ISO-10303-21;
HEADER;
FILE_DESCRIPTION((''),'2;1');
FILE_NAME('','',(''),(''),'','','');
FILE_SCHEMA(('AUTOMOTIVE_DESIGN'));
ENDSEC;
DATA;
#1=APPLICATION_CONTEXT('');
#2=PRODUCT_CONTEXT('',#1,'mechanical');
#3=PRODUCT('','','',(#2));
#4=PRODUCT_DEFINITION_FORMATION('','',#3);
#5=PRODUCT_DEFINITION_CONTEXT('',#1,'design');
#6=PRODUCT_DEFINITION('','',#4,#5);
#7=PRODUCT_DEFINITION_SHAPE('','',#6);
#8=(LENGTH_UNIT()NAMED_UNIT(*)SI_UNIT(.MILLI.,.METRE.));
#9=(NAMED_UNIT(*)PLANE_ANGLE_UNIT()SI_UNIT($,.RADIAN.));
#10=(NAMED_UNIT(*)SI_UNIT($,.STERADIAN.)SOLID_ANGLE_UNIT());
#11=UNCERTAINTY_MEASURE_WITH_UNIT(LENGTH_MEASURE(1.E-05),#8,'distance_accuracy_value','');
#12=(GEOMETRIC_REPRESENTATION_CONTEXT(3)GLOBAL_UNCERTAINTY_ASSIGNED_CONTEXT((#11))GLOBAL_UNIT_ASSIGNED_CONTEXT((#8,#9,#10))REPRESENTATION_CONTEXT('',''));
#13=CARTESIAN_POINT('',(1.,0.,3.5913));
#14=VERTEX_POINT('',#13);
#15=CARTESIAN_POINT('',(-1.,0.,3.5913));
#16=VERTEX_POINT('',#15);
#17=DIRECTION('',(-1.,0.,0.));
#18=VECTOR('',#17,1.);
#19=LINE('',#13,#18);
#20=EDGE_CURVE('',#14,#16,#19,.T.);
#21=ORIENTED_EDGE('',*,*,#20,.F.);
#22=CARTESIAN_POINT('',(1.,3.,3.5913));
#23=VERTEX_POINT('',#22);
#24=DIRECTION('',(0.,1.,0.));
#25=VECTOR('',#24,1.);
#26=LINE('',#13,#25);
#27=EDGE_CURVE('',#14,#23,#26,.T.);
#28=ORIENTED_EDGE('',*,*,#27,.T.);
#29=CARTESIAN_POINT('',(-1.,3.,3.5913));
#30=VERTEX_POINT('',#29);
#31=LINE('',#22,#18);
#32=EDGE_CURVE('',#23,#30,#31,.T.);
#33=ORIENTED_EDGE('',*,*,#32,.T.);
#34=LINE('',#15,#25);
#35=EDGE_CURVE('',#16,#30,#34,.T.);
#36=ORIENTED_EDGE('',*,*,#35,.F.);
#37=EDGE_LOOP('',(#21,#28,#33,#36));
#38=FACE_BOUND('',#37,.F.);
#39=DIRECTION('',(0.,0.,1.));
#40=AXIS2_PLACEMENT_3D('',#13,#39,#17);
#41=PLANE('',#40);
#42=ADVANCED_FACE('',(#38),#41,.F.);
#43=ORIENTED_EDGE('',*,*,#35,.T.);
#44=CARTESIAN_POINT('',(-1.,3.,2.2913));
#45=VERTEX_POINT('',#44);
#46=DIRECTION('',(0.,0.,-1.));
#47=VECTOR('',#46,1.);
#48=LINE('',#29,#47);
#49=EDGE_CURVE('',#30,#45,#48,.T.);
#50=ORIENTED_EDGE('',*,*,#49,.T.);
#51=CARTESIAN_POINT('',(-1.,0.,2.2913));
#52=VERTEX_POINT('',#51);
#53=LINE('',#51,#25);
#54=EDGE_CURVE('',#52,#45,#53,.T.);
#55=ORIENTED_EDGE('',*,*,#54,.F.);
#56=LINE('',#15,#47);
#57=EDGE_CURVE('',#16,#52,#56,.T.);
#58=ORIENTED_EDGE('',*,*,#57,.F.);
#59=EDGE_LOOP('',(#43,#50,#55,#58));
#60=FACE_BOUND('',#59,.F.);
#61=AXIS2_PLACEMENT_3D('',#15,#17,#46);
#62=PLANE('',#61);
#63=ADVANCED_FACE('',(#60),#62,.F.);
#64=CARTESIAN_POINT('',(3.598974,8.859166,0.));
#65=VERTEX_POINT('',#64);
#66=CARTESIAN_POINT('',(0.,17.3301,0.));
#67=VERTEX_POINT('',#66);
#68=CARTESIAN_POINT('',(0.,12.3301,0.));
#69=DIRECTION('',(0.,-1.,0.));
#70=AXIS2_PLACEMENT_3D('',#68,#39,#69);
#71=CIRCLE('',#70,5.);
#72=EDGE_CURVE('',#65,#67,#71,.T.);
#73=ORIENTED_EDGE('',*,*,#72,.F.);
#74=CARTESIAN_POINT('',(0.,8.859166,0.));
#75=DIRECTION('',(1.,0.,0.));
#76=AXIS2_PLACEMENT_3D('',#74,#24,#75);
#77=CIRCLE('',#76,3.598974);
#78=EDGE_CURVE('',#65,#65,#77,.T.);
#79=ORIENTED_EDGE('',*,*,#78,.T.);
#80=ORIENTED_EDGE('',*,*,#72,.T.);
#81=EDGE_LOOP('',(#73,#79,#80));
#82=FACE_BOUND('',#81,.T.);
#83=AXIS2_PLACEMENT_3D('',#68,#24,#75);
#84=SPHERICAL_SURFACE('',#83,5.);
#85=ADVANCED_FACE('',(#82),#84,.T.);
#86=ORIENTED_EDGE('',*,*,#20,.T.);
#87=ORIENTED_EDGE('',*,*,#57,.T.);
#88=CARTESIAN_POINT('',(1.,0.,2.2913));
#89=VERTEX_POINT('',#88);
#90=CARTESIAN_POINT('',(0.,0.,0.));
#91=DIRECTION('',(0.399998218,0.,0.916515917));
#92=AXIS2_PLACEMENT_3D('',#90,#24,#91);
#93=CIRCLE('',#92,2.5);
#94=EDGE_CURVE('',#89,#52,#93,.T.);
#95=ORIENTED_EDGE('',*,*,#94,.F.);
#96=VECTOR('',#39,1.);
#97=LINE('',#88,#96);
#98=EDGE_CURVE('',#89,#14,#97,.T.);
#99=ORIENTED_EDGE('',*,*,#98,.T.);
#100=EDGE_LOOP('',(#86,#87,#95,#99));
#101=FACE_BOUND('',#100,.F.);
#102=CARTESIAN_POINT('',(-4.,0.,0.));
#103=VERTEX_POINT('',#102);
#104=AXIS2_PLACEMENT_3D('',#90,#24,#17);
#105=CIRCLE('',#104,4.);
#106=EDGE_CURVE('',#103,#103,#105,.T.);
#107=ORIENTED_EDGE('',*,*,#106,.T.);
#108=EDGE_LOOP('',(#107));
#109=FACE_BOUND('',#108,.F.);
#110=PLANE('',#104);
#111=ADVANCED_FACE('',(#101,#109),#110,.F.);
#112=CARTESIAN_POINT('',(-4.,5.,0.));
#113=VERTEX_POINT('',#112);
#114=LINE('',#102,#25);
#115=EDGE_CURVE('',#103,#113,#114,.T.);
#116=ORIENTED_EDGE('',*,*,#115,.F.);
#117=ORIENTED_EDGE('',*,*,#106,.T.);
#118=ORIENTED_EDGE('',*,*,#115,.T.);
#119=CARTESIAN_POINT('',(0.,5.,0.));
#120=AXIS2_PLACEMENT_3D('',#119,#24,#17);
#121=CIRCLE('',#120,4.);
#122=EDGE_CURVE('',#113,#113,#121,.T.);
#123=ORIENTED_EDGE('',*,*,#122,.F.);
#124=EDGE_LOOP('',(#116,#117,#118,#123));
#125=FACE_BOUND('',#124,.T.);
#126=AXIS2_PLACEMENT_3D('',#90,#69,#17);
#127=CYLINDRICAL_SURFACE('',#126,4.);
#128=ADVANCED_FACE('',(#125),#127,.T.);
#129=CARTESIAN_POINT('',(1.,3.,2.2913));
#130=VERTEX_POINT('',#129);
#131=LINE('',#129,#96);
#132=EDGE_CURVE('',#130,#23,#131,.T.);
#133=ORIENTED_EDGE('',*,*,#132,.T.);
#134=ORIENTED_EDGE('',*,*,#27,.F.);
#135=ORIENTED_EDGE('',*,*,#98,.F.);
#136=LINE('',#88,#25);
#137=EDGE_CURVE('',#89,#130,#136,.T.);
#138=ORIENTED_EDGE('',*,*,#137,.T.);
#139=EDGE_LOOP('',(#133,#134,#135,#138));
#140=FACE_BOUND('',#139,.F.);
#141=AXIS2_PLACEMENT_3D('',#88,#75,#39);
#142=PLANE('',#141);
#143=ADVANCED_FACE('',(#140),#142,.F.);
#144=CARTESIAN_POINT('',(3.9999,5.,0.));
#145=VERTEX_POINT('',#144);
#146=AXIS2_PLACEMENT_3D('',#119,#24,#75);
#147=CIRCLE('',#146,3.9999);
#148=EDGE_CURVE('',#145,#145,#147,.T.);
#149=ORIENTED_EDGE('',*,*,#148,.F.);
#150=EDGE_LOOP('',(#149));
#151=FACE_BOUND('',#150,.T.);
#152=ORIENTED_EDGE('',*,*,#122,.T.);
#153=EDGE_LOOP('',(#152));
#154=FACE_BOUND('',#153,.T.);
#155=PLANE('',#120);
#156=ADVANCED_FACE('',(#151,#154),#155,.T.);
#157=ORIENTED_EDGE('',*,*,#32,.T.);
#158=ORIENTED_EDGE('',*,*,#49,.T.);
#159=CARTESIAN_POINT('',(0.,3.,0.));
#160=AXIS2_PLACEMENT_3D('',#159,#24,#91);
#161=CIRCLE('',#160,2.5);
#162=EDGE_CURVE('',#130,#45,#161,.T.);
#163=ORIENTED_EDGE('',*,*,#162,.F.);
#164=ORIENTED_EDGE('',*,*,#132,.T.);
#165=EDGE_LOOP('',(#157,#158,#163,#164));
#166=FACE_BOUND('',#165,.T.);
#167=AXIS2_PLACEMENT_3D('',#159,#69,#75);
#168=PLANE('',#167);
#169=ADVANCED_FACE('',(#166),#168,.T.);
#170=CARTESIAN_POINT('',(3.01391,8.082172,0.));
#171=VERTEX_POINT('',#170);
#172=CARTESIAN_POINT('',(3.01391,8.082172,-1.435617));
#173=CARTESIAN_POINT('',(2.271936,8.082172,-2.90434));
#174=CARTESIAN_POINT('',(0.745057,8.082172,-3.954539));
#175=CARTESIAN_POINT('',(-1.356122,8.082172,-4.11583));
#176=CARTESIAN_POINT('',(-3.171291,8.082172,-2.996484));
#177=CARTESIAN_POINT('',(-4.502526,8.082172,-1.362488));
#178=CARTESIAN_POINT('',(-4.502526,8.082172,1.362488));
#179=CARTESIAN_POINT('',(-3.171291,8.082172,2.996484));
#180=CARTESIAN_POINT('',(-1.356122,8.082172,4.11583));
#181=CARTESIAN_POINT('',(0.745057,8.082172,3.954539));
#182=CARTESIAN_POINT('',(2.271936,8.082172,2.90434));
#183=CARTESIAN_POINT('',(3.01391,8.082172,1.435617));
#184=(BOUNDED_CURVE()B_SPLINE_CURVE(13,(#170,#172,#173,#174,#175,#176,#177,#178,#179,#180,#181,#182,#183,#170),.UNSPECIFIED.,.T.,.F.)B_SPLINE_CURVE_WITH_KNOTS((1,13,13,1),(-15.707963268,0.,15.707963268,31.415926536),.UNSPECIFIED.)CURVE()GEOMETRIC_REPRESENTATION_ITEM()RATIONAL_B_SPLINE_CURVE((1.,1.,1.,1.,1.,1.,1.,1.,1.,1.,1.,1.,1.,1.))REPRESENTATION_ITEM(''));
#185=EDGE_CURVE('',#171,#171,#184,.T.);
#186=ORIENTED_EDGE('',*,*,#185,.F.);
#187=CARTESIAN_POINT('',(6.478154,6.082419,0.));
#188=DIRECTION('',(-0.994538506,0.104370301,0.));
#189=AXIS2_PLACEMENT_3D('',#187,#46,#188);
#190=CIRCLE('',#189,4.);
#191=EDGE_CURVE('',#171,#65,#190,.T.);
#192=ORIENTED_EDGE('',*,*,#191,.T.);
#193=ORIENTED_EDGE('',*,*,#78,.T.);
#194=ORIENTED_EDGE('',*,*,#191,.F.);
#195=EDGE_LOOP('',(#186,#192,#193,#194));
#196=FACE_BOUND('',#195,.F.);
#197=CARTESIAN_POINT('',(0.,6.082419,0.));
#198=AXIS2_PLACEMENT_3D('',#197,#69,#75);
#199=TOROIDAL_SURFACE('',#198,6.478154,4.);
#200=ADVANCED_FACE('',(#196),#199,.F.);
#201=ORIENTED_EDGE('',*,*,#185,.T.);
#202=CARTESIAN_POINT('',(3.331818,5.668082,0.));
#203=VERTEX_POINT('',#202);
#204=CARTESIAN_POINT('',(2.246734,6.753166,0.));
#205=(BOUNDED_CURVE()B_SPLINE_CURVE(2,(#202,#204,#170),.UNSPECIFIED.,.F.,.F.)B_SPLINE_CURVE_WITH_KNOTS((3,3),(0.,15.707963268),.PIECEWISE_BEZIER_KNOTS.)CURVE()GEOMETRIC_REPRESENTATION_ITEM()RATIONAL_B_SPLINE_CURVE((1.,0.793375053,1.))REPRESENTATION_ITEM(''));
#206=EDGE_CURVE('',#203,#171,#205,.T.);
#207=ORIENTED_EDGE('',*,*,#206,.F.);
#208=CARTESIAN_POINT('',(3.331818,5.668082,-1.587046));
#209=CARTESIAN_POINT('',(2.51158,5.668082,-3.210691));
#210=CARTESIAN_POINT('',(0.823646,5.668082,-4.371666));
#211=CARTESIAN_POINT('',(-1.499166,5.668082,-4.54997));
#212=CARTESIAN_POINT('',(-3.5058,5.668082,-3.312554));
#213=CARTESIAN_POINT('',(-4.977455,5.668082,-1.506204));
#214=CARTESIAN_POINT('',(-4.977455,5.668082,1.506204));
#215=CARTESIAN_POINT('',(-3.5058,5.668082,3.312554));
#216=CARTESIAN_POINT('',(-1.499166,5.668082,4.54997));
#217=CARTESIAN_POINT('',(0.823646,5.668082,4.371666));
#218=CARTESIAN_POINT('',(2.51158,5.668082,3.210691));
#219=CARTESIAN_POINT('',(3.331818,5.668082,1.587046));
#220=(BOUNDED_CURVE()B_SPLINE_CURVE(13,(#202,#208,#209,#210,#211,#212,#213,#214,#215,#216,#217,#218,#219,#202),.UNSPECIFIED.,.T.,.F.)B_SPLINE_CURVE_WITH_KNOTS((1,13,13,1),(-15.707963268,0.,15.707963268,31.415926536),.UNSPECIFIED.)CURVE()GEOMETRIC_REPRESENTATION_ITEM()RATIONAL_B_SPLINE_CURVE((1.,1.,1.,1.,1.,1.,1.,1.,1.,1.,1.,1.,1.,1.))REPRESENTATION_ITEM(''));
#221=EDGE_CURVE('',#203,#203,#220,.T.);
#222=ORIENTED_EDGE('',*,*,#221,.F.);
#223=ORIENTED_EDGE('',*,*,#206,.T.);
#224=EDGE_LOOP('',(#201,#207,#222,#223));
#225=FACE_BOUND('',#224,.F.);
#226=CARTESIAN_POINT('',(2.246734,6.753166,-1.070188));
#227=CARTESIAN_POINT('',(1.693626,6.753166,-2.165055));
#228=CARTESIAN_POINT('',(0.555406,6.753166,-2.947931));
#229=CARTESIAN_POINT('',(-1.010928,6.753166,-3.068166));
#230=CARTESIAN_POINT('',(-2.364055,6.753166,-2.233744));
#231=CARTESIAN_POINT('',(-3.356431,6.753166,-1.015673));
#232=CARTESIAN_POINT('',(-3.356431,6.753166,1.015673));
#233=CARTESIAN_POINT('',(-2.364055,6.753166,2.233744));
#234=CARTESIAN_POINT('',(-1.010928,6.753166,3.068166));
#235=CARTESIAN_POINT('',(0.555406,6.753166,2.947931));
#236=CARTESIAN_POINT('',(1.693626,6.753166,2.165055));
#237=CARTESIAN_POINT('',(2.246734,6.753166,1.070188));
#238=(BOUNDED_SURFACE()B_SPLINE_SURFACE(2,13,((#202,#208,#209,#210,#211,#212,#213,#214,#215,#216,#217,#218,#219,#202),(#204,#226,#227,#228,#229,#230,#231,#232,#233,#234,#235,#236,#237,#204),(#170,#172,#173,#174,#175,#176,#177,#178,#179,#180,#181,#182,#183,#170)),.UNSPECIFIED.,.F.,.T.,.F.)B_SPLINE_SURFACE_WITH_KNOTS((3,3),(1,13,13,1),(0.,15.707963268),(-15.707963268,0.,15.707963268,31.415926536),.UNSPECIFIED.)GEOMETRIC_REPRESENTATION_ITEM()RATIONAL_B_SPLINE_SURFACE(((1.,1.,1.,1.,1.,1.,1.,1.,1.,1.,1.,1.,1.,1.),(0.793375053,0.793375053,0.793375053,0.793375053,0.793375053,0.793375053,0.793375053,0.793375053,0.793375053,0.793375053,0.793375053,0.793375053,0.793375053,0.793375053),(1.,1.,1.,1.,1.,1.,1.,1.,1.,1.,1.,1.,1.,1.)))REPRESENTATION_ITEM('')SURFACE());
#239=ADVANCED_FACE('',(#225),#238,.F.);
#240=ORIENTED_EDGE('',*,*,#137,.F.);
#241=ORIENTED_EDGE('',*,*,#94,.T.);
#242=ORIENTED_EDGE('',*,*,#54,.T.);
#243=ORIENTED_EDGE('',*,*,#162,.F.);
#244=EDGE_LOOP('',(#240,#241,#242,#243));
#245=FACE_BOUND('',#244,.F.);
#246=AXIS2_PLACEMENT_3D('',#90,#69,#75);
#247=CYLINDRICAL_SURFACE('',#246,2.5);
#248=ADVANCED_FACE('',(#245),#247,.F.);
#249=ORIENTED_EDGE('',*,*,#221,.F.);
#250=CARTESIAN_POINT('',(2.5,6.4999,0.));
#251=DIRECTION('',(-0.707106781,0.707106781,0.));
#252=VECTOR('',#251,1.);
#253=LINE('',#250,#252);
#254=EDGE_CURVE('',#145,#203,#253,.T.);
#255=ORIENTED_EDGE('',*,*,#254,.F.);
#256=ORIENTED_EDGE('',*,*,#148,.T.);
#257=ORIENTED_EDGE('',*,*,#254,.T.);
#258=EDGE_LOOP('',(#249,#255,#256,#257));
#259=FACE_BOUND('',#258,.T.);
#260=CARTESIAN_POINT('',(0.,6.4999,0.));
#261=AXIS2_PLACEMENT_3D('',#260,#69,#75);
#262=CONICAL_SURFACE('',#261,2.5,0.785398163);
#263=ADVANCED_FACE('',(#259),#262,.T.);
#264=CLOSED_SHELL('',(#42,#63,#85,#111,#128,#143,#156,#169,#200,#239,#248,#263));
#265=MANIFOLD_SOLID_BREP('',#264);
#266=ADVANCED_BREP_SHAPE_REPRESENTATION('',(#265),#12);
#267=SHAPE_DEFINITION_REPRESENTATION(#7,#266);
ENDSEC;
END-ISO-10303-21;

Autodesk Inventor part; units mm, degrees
ref_plane "YZ Plane" through (0, 0, 0) normal (1, 0, 0) x (0, 1, 0)
ref_plane "XZ Plane" through (0, 0, 0) normal (0, 1, 0) x (-1, 0, 0)
ref_plane "XY Plane" through (0, 0, 0) normal (0, 0, 1) x (1, 0, 0)
sketch "草圖1" plane through (0, 0, 0) normal (0, 1, 0) x (-1, 0, 0)
  circle A0 centre (0, 0) radius 4
  dimension "d0" = 8
extrude "擠出1" add sketch "草圖1" along normal blind 5
sketch "草圖2" plane through (0, 0, 0) normal (0, -1, 0) x (1, 0, 0)
  circle A0 centre (0, 0) radius 2.5
  dimension "d3" = 5
extrude "擠出2" cut sketch "草圖2" against normal blind 3
sketch "草圖3" plane through (0, 5, 0) normal (0, 1, 0) x (1, 0, 0)
  circle A0 centre (0, 0) radius 2.5
  dimension "d6" = 5
extrude "擠出3" add sketch "草圖3" along normal blind 3
chamfer "倒角1" distance 1.5 angle 45 1 edges at (-2.5, 5, 0)
sketch "草圖4" plane through (0, 0, 0) normal (0, 0, 1) x (1, 0, 0)
  arc A0 (0, 7.3301) -> (0, 17.3301) centre (0, 12.3301) ccw
  line L0 (0, 12.3301) -> (0, 17.3301) construction
  line L1 (0, 12.3301) -> (0, 7.3301) construction
  line L2 (0, 17.3301) -> (0, 7.3301)
  line L3 (2.5, 8) -> (-2.5, 8) projected
  point P0 (0, 0)
  dimension "d12" = 5
  dimension "d13" = 180
  dimension "d14" = 90
  dimension "d15" = 2.5
revolve "迴轉1" add sketch "草圖4" angle 360 about axis through (0, 12.3301, 0) along (0, -1, 0)
fillet "圓角1" radius 4 1 edges at (-2.5, 8, 0)
sketch "草圖6" plane through (0, 0, 0) normal (0, -1, 0) x (1, 0, 0)
  circle A0 centre (0, 0) radius 2.5 projected
  line L0 (-1, 2.2913) -> (1, 2.2913)
  line L1 (1, 2.2913) -> (1, 3.5913)
  line L2 (1, 3.5913) -> (-1, 3.5913)
  line L3 (-1, 3.5913) -> (-1, 2.2913)
  dimension "d20" = 2
  dimension "d21" = 1.3
extrude "擠出5" cut sketch "草圖6" against normal blind 3 contours A0 L3 L2 L1
fillet "圓角2" radius 2 1 edges at (-2.5, 6.4999, 0)
sketch "草圖5" plane through (0, 0, 0) normal (0, -1, 0) x (1, 0, 0)
  circle A0 centre (0, 0) radius 3.2143 projected
  circle A1 centre (0, 0) radius 2.5 projected
  circle A2 centre (0, 0) radius 4 projected
properties part number "伸縮缸 球軸 球"
